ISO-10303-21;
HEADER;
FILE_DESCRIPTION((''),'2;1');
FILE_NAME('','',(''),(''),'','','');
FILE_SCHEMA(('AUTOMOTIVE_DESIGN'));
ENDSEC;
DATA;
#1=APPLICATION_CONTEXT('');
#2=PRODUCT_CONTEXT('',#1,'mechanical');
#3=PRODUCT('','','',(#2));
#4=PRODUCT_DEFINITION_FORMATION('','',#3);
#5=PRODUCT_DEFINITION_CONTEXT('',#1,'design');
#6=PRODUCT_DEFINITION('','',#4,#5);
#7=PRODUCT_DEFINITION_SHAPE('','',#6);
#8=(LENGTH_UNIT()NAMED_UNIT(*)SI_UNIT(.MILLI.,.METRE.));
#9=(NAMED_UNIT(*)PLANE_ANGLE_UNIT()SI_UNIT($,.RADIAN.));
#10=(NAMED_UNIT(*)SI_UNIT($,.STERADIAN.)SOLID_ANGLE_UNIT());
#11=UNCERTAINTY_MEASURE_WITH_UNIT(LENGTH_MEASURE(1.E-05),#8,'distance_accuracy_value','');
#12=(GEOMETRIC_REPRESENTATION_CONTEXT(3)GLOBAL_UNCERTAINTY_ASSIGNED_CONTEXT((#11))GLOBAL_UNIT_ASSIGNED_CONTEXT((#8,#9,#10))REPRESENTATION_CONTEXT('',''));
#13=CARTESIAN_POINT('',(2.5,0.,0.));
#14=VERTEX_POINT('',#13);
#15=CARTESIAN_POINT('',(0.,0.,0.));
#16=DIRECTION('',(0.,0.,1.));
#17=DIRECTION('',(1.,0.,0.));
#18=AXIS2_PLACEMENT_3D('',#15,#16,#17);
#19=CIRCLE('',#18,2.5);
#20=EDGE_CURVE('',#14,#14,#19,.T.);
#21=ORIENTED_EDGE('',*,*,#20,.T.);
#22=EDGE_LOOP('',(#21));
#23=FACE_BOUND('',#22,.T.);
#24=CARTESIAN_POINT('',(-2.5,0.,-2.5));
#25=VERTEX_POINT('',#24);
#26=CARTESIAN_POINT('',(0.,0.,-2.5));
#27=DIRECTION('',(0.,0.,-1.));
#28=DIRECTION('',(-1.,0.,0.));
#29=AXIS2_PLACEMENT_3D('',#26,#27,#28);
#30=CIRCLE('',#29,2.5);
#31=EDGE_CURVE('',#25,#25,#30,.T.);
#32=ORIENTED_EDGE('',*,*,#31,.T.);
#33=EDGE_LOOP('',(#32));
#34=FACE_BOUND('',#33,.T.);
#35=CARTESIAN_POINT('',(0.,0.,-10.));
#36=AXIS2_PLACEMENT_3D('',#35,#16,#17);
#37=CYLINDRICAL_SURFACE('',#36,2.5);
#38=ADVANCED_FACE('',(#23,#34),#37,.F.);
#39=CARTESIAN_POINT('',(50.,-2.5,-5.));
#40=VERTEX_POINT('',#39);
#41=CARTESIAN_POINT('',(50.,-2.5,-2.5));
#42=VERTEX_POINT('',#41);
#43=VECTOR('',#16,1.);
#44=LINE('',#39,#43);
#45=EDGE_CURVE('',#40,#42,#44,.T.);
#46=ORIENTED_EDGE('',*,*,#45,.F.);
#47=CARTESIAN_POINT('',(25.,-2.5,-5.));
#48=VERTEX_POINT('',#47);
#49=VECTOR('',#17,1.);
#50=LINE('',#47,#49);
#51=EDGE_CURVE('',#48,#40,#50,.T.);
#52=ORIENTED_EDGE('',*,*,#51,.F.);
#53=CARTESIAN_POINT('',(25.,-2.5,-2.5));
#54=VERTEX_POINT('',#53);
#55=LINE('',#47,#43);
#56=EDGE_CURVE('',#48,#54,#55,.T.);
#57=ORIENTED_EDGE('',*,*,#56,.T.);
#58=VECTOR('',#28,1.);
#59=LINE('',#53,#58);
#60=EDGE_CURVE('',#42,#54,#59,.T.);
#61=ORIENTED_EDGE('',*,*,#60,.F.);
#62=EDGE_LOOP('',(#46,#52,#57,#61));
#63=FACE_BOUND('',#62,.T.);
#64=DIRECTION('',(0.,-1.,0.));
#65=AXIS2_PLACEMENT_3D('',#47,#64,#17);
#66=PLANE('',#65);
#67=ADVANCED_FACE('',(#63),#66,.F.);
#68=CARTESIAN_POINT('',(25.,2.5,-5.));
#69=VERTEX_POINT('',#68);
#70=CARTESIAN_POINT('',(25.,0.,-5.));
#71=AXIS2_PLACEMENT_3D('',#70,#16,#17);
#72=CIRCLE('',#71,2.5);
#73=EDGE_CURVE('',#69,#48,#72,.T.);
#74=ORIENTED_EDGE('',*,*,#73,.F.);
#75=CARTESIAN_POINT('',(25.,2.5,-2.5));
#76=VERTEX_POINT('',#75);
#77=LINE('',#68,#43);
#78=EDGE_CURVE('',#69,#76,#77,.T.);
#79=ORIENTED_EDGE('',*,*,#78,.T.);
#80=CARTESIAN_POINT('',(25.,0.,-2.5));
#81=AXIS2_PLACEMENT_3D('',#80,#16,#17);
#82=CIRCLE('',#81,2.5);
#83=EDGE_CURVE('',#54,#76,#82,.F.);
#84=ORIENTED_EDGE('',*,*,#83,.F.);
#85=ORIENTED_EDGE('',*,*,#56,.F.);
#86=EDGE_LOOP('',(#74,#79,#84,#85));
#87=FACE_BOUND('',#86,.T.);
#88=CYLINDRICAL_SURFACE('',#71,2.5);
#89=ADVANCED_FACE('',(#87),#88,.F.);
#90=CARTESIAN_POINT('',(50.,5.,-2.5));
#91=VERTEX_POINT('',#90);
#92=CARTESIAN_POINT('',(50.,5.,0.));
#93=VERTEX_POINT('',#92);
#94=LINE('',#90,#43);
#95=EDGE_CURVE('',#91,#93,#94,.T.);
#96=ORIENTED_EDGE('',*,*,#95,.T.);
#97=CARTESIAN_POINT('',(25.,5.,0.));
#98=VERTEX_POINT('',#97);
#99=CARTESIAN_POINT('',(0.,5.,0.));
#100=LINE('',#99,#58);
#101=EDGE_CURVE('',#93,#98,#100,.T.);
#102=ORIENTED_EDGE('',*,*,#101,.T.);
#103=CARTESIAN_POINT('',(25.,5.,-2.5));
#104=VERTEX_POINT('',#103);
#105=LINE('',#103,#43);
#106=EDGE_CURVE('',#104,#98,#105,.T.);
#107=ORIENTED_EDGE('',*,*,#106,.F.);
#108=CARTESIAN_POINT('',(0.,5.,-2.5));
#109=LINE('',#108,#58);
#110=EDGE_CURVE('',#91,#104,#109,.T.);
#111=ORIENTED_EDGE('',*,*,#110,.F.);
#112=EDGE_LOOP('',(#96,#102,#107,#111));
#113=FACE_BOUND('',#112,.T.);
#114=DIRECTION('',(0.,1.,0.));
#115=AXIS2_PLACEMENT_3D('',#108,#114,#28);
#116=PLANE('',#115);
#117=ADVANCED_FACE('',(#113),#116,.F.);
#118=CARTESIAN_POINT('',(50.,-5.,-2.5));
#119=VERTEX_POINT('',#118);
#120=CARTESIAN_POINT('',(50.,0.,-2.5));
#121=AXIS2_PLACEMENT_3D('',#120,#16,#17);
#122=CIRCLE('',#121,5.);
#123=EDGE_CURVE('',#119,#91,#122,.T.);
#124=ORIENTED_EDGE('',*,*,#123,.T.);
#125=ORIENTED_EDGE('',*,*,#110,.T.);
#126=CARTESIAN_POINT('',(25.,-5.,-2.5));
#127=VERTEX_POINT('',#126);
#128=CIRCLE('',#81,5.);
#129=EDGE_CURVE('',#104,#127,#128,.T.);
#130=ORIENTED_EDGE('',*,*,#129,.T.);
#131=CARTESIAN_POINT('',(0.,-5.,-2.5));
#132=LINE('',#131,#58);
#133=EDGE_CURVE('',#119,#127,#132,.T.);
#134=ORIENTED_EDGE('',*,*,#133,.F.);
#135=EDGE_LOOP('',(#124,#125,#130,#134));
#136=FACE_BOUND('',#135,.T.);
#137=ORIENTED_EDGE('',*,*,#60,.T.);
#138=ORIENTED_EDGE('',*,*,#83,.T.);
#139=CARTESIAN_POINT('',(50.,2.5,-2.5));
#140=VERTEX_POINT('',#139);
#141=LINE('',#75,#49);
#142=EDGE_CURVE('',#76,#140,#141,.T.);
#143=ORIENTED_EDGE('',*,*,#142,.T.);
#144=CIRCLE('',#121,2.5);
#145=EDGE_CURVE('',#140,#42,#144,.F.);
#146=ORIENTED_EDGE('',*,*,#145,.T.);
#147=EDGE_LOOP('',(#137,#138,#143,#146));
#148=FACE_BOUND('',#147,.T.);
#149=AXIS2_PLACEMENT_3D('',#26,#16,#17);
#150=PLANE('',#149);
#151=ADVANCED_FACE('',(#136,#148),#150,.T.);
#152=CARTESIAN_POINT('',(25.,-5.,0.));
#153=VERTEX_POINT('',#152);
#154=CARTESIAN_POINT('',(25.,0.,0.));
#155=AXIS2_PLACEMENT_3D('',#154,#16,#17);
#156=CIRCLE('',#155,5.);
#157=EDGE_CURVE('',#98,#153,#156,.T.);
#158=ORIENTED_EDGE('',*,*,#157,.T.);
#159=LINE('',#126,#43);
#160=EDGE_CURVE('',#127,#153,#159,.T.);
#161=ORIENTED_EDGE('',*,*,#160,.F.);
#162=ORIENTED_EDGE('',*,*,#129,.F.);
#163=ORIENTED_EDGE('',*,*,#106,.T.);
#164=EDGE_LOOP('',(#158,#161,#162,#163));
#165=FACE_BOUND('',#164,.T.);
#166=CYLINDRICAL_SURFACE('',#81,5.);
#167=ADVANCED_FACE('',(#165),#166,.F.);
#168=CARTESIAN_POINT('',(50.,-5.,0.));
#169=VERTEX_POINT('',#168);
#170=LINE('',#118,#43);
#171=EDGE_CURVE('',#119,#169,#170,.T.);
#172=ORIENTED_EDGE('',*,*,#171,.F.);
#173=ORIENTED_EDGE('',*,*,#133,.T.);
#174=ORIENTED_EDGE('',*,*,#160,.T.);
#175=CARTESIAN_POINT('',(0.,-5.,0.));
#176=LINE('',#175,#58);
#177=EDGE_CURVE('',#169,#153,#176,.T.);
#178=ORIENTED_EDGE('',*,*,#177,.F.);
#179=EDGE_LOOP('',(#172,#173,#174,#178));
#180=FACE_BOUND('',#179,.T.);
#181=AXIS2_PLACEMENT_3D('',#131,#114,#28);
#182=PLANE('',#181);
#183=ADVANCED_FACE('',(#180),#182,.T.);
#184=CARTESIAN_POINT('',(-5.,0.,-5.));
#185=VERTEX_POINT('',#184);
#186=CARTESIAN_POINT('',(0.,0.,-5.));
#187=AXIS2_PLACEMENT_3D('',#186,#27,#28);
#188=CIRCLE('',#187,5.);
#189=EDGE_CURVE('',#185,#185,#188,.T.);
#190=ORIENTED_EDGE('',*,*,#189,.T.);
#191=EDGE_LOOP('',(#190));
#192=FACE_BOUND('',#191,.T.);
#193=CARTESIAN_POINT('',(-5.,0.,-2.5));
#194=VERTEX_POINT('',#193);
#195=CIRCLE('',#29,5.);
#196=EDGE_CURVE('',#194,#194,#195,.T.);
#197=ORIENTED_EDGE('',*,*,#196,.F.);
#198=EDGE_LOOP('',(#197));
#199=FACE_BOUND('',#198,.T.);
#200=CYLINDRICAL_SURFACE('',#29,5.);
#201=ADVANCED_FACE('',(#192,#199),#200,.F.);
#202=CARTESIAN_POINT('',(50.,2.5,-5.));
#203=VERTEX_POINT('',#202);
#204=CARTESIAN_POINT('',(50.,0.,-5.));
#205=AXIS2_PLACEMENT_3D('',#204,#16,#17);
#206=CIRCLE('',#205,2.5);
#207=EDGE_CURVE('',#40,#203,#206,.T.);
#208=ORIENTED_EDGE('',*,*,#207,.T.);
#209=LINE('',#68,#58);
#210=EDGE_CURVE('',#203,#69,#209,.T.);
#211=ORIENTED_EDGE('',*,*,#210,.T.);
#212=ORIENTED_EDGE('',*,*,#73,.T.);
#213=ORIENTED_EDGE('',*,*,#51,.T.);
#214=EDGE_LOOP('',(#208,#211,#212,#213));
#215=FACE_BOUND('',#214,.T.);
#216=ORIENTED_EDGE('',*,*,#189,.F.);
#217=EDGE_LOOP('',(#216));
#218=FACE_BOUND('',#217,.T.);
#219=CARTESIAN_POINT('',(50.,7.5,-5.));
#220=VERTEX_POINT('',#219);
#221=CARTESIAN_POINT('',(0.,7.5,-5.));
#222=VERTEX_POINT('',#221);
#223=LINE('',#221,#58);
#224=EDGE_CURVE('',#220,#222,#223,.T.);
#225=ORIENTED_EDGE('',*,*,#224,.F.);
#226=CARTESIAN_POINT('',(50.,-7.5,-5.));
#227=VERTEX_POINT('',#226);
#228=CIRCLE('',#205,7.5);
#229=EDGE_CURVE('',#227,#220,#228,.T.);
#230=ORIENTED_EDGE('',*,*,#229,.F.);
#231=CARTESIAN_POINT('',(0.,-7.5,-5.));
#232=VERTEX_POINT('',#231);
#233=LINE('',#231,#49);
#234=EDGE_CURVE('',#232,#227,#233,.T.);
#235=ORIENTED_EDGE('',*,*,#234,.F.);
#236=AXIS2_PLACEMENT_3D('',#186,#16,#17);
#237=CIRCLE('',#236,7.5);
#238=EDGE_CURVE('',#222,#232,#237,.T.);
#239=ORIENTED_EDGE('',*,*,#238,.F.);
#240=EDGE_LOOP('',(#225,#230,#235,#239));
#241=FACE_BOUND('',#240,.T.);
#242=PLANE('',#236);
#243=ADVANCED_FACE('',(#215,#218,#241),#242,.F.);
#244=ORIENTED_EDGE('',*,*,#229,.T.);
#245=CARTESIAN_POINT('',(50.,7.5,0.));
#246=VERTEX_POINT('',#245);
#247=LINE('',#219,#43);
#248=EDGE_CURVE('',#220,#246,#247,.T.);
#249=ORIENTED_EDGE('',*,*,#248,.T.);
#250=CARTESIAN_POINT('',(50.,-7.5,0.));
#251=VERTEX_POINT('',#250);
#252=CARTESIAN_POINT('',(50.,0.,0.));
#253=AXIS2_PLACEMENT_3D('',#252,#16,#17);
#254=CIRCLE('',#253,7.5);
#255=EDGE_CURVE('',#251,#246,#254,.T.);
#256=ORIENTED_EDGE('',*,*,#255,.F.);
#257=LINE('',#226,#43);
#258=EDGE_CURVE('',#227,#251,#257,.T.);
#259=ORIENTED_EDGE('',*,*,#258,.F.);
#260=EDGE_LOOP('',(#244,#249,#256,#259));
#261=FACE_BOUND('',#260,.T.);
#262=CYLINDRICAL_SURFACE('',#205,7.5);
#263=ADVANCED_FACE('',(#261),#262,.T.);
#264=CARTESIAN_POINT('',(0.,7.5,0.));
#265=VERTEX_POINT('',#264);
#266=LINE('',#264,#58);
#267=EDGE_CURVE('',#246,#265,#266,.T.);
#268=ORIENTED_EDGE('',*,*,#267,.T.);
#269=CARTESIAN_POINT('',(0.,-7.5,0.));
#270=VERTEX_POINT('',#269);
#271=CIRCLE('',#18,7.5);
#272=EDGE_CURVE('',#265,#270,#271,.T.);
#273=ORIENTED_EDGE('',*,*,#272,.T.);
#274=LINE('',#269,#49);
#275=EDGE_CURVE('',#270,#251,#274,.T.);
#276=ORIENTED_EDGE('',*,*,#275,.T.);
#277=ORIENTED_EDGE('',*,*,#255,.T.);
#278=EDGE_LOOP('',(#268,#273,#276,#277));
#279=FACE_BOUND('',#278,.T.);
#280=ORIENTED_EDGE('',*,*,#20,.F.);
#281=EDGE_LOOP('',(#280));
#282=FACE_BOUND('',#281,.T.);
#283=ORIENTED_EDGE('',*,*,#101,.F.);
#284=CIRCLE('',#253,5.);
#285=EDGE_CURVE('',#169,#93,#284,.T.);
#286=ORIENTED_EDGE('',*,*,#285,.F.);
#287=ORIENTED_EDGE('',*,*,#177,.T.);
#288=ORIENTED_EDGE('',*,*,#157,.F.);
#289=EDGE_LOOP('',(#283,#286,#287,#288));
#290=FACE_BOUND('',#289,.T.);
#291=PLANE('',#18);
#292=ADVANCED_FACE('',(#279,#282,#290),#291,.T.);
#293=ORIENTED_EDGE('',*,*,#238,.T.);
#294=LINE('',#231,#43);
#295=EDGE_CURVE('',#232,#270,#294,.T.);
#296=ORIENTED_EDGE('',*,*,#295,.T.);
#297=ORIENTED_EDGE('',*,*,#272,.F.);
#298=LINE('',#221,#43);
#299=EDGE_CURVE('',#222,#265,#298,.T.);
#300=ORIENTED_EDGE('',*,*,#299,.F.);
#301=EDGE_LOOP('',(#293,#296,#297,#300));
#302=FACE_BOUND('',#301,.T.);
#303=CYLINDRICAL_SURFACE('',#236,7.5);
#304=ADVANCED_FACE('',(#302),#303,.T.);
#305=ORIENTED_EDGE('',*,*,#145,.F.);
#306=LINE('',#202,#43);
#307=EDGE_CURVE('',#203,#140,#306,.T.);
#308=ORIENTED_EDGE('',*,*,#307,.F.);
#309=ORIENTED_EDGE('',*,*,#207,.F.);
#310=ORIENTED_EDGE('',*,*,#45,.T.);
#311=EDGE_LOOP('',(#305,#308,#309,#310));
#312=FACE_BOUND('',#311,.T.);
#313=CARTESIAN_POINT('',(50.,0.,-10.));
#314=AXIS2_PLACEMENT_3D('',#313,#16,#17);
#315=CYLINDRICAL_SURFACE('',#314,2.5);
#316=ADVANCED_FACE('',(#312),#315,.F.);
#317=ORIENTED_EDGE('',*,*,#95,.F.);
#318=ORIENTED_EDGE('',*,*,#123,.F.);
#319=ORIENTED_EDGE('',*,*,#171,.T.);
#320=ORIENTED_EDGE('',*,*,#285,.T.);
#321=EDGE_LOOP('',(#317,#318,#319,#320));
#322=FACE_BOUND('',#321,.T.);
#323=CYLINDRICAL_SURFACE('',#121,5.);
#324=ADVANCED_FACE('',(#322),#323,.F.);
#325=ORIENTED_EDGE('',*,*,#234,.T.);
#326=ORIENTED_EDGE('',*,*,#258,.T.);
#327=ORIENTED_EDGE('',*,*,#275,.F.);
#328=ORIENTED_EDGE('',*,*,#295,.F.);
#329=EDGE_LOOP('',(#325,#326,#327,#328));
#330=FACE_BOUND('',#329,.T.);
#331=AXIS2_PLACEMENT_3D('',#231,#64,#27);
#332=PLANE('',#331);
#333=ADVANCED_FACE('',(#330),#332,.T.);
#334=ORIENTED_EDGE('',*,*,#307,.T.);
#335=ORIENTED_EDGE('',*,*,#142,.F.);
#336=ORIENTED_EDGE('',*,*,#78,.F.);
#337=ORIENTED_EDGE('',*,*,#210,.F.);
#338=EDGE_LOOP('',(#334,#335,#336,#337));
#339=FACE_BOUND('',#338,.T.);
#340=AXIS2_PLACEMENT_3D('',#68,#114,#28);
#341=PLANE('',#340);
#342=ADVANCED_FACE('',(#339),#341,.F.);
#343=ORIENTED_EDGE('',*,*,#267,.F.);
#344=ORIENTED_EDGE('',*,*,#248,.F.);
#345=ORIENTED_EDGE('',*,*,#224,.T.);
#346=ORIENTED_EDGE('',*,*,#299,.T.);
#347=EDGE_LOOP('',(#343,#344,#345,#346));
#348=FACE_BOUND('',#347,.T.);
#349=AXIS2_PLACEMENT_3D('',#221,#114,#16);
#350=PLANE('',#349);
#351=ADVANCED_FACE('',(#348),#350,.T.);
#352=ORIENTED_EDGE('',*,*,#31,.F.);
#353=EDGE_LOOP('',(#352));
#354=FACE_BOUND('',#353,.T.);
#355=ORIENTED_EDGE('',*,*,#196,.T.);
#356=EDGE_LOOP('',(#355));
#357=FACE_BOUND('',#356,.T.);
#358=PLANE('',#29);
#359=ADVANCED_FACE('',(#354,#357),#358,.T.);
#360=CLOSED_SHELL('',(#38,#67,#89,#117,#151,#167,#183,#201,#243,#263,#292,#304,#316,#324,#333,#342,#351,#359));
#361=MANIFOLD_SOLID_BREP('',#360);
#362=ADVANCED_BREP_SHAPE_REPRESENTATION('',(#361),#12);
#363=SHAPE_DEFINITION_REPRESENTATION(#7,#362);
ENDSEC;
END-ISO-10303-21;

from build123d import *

# Parameters (mm, degrees)
BASE_FLANGE1_DEPTH = 5
SKETCH17_R         = 5
CUT_EXTRUDE1_DEPTH = 2.5
SKETCH39_R         = 2.5
CUT_EXTRUDE2_DEPTH = 10
CUT_EXTRUDE4_DEPTH = 59.202233634
SKETCH40_R         = 5
SKETCH40_R_2       = 2.5
CUT_EXTRUDE6_DEPTH = 2.5


# Sheet-metal steps are written as plain solids
with BuildPart() as part:
    # Sketch1 → Base-Flange1 (new body)
    with BuildSketch(Plane.XY):
        with BuildLine():
            Line((0, 7.5), (50, 7.5))
            ThreePointArc((50, 7.5), (57.5, 0), (50, -7.5))
            Line((50, -7.5), (0, -7.5))
            ThreePointArc((0, -7.5), (-7.5, 0), (0, 7.5))
        make_face()
    extrude(amount=-BASE_FLANGE1_DEPTH)

    # Sketch17 → Cut-Extrude1 (cut)
    with BuildSketch(Plane(origin=(0, 0, -5), x_dir=(-1, 0, 0), z_dir=(0, 0, -1))):
        Circle(SKETCH17_R)
    extrude(amount=-CUT_EXTRUDE1_DEPTH, mode=Mode.SUBTRACT)

    # Sketch39 → Cut-Extrude2 (cut)
    with BuildSketch(Plane.XY):
        Circle(SKETCH39_R)
        with Locations((50, 0)):
            Circle(SKETCH39_R)
    extrude(amount=-CUT_EXTRUDE2_DEPTH, mode=Mode.SUBTRACT)

    # Sketch41 → Cut-Extrude4 (cut, through all)
    with BuildSketch(Plane.XY):
        with BuildLine():
            Line((25, 2.5), (50, 2.5))
            ThreePointArc((50, 2.5), (52.5, 0), (50, -2.5))
            Line((50, -2.5), (25, -2.5))
            ThreePointArc((25, -2.5), (22.5, 0), (25, 2.5))
        make_face()
    extrude(amount=-CUT_EXTRUDE4_DEPTH, mode=Mode.SUBTRACT)

    # Sketch40 → Cut-Extrude6 (cut)
    # profile 1 of 2: a face of its own
    with BuildSketch(Plane.XY):
        with Locations((50, 0)):
            Circle(SKETCH40_R)
        with Locations((50, 0)):
            Circle(SKETCH40_R_2, mode=Mode.SUBTRACT)
    # profile 2 of 2: a face of its own
    with BuildSketch(Plane.XY):
        with BuildLine():
            Line((25, -5), (50, -5))
            ThreePointArc((50, -5), (45, 0), (50, 5))
            Line((50, 5), (25, 5))
            ThreePointArc((25, 5), (20, 0), (25, -5))
        make_face()
    extrude(amount=-CUT_EXTRUDE6_DEPTH, mode=Mode.SUBTRACT)


solid = part.part
